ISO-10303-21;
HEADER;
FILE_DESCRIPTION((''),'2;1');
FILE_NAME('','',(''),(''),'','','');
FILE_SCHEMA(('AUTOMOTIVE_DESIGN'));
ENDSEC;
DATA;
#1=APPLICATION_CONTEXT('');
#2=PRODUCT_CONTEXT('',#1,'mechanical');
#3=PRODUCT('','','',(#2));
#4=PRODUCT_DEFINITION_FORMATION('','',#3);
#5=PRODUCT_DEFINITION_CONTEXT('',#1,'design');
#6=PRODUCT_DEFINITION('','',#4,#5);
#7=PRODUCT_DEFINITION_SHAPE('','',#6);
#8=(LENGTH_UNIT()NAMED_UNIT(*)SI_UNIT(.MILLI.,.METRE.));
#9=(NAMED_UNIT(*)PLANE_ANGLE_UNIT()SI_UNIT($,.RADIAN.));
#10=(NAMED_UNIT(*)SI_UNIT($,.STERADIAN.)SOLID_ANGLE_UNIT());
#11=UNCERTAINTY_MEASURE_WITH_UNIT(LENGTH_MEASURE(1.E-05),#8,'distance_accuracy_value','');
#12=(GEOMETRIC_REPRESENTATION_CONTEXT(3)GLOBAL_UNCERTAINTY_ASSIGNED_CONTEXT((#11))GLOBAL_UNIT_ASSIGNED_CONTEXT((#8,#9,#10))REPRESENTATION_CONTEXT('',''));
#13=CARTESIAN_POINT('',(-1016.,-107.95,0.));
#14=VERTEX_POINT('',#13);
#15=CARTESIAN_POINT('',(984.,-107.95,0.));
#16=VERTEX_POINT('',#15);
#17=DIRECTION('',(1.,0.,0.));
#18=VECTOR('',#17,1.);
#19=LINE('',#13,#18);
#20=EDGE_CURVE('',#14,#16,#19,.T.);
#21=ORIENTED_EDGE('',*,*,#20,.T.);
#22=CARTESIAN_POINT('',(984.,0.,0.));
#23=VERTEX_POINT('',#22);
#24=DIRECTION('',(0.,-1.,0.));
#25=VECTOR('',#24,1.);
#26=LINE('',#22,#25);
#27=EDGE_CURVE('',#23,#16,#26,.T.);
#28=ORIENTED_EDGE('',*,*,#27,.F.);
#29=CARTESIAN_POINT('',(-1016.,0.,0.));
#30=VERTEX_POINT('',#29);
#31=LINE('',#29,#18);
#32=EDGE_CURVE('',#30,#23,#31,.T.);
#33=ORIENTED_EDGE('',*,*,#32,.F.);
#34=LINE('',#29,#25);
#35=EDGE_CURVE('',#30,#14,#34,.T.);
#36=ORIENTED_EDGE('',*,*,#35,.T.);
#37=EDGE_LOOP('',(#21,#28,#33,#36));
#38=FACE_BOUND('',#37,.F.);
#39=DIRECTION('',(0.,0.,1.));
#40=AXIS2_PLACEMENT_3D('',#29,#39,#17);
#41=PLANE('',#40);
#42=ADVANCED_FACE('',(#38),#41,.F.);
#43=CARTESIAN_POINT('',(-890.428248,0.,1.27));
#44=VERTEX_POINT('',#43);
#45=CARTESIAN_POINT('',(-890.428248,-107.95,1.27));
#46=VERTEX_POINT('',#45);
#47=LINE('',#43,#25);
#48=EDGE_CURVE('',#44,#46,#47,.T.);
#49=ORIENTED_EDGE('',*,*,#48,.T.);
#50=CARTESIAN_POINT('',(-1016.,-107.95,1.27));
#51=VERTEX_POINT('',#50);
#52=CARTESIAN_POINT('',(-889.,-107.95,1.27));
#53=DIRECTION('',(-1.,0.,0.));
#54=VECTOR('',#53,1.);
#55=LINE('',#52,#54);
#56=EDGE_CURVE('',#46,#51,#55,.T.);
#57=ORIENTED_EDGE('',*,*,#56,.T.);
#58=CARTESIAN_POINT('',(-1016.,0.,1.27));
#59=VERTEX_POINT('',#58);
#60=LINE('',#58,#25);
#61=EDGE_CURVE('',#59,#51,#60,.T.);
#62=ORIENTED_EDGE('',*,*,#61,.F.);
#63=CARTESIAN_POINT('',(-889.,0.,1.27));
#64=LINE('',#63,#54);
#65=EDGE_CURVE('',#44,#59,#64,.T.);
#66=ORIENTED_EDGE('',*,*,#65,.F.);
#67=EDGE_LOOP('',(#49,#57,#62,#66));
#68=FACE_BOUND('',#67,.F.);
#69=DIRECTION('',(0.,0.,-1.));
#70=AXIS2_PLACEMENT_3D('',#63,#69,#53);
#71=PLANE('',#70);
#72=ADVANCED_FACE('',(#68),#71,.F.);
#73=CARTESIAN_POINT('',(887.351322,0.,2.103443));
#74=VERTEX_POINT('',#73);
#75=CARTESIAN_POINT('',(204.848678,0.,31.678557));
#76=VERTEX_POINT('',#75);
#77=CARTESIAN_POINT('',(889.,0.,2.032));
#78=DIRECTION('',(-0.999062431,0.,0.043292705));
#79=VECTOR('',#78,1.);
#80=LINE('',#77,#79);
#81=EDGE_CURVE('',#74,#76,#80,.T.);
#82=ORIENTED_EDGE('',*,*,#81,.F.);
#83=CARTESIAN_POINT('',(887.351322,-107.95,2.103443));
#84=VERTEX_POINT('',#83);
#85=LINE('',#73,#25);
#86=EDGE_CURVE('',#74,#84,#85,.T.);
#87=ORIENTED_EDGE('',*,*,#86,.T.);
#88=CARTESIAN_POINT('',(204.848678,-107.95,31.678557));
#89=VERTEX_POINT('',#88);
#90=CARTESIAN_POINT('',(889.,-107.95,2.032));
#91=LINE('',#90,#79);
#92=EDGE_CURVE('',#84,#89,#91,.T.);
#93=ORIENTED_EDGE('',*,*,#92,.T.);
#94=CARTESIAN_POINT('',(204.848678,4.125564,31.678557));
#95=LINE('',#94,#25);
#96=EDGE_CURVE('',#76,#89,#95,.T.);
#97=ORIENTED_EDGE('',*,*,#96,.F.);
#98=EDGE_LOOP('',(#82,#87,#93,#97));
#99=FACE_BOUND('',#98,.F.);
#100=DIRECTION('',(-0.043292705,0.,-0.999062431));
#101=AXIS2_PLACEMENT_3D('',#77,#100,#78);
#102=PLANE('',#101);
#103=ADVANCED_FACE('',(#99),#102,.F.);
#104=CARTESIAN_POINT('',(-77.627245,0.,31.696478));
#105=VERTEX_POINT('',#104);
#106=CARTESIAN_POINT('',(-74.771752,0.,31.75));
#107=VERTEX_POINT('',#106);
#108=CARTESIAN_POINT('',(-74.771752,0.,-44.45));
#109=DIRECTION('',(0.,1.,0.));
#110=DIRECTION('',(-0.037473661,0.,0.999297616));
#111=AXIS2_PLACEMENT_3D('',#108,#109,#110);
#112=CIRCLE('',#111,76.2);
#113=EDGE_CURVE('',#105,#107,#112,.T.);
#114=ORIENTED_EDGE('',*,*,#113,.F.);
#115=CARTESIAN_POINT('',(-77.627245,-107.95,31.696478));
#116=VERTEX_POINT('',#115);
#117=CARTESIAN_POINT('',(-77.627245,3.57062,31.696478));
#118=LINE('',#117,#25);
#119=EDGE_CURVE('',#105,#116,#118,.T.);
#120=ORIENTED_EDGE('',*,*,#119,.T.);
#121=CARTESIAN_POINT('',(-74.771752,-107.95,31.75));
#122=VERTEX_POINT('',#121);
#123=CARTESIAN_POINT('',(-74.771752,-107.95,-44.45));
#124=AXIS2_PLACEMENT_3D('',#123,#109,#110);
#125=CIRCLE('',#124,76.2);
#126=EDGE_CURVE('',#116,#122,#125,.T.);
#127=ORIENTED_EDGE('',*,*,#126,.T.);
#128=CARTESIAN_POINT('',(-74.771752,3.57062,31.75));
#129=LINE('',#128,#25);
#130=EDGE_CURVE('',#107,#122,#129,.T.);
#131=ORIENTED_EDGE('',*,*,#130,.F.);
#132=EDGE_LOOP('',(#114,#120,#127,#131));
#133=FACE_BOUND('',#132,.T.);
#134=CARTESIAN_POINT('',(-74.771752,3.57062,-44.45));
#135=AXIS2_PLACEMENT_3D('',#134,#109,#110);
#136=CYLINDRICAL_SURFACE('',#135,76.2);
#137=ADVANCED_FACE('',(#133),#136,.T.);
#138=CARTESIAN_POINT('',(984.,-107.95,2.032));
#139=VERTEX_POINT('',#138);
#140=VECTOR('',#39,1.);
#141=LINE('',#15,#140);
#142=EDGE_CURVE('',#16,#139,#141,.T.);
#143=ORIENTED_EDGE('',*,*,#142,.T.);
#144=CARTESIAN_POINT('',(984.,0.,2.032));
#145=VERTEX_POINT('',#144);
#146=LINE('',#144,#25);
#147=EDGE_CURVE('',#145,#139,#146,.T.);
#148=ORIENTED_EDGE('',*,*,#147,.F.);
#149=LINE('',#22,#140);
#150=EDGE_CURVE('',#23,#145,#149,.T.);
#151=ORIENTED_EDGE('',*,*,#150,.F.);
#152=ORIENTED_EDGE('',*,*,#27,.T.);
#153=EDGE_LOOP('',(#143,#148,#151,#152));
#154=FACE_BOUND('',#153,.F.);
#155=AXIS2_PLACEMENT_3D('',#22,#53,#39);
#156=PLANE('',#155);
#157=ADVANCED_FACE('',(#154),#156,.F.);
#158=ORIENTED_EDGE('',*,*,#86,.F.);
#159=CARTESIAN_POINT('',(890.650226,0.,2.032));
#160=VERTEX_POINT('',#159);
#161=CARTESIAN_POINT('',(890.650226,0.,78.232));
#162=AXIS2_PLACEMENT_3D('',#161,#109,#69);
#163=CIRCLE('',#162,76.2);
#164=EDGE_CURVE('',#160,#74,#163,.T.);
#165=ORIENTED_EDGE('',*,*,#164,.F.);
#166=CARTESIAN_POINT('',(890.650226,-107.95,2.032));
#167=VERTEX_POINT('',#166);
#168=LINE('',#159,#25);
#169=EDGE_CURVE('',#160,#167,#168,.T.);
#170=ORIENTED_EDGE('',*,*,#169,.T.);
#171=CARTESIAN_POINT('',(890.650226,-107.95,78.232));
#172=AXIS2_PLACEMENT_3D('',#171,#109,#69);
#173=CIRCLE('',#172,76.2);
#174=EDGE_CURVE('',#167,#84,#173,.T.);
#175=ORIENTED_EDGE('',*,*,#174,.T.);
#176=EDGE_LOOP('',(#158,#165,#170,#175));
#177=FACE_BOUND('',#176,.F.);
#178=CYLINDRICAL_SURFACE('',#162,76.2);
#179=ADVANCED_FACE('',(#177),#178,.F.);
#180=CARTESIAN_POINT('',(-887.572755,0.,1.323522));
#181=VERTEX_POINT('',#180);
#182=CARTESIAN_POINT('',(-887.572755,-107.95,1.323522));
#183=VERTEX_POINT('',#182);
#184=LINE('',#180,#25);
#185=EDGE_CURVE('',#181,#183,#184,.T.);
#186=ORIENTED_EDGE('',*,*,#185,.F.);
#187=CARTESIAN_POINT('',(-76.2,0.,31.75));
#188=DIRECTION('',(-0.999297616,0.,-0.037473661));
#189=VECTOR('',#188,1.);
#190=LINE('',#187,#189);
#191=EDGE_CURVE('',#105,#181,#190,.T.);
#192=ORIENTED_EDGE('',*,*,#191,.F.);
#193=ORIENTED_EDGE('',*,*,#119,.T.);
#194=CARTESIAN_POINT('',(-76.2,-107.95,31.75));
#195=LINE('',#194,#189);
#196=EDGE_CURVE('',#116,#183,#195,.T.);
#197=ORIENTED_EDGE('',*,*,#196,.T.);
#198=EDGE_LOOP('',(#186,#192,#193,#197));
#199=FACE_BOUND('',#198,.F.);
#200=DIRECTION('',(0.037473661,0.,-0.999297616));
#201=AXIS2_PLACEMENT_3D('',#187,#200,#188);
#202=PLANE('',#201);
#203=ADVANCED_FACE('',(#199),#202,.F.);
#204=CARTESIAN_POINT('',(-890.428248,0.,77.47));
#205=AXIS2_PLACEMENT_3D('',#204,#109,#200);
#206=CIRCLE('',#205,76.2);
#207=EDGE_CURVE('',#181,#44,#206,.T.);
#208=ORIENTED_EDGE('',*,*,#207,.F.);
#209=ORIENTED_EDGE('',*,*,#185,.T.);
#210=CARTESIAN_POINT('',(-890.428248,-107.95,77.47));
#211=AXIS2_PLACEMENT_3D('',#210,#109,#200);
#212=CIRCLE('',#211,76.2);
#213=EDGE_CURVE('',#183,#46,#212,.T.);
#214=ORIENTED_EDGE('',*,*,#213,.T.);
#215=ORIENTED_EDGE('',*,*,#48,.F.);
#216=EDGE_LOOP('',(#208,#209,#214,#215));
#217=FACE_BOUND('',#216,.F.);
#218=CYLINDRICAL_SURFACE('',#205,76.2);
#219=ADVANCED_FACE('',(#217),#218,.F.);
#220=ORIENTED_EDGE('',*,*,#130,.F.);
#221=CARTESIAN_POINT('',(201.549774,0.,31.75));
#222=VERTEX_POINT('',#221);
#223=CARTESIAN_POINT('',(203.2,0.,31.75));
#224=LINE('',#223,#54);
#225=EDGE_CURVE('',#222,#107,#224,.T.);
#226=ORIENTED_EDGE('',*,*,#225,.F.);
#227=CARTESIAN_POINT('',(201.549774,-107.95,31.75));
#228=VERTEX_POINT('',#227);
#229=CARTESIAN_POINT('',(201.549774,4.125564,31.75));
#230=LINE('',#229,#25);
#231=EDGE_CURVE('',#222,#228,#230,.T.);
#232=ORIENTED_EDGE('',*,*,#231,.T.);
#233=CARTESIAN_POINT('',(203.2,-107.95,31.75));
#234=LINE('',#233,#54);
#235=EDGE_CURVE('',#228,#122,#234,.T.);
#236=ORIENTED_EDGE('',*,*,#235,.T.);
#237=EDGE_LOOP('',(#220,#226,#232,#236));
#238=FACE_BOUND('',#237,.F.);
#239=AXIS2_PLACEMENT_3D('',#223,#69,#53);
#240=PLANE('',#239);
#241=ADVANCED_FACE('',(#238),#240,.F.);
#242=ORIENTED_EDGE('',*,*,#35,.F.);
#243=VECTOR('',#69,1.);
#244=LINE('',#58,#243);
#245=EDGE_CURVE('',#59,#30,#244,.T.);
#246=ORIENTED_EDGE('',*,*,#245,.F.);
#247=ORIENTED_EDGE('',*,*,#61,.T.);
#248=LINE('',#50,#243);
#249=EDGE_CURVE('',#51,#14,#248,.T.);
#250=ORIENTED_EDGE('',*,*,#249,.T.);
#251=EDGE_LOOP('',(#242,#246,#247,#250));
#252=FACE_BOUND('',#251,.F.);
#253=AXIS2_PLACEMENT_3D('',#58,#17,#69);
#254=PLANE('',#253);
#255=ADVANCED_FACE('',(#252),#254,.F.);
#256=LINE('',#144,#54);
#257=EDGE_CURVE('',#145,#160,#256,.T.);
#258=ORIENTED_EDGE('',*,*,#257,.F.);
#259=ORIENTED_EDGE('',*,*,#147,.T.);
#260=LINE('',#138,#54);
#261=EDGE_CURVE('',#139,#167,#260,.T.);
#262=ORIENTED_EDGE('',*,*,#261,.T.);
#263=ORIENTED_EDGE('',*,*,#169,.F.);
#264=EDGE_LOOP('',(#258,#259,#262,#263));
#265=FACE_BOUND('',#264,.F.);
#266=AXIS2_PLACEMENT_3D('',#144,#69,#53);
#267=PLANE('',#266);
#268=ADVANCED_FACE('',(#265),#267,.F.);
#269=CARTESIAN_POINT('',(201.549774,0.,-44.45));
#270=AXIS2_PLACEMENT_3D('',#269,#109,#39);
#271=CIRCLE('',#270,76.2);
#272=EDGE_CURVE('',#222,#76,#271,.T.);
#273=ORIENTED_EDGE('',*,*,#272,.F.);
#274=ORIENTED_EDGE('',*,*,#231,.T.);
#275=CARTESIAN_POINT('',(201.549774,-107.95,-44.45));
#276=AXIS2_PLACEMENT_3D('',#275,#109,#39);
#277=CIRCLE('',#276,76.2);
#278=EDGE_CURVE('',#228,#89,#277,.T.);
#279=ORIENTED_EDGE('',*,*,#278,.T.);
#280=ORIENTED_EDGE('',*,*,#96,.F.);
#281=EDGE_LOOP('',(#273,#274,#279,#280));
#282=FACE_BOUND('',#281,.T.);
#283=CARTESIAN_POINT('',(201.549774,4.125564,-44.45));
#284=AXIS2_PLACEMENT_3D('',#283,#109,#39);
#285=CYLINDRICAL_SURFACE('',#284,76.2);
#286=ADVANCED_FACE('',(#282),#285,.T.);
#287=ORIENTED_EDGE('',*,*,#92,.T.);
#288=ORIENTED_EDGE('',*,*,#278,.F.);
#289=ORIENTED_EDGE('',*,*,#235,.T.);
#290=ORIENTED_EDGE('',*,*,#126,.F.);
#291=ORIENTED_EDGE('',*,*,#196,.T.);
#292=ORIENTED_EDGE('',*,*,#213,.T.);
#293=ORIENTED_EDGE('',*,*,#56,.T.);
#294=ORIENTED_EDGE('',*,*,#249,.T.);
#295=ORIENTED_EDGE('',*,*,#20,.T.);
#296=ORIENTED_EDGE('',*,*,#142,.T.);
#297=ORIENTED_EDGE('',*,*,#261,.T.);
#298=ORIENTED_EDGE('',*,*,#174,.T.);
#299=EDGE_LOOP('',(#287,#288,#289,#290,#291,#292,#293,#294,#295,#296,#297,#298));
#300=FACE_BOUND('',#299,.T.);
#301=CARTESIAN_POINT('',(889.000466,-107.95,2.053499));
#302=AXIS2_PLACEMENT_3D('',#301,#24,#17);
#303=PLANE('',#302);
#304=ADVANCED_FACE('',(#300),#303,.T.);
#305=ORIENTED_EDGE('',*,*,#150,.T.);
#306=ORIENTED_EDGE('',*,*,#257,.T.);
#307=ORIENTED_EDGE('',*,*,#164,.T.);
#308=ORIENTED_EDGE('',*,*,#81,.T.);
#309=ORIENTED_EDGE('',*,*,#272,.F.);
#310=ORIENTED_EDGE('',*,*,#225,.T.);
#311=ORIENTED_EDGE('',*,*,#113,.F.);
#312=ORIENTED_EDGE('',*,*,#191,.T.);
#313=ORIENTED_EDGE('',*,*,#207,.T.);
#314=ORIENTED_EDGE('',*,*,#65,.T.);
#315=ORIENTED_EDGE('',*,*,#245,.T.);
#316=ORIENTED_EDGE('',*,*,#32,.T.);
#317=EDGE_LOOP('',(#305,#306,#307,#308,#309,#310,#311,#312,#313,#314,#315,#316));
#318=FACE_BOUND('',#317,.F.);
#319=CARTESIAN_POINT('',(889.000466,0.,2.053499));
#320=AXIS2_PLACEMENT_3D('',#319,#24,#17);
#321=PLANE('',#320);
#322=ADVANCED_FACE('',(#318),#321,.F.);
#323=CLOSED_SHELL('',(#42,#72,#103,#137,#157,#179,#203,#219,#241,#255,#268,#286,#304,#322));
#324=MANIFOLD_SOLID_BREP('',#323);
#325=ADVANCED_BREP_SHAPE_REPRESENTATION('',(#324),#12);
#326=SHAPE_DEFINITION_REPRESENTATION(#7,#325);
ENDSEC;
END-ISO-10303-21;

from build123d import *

# Parameters (mm, degrees)
F1_DEPTH    = 107.95
F2_T1_DEPTH = 107.95
F3_T1_DEPTH = 107.95
F3_T3_DEPTH = 115.0912402897
F3_T5_DEPTH = 116.2011283703


# Not quite as in the source:
# - a fillet or chamfer that OpenCascade refuses, or shapes differently, is made with other operations: its cross-section is extruded or revolved along the edge and cut away or added


with BuildPart() as f1:
    # F0 (on Front) → F1 (new body)
    with BuildSketch(Plane.XZ):
        Polygon((-1016, 1.27), (-1016, 0), (984, 0), (984, 2.032), (889, 2.032), (203.2, 31.75), (-76.2, 31.75), (-889, 1.27), align=None)
    extrude(amount=F1_DEPTH)

    # F2: fillet of radius 76.2 on 1 edges, made by hand

    # F2_s2 → F2_t1 (join)
    with BuildSketch(Plane.XZ):
        with BuildLine():
            ThreePointArc((-887.5727551211, 1.323521683), (-889.0002508168, 1.2833815957), (-890.4282480579, 1.27))
            Line((-890.4282480579, 1.27), (-889, 1.27))
            Line((-889, 1.27), (-887.5727551211, 1.323521683))
        make_face()
    extrude(amount=F2_T1_DEPTH)

    # F3: fillet of radius 76.2 on 3 edges, made by hand

    # F3_s2 → F3_t1 (join)
    with BuildSketch(Plane.XZ):
        with BuildLine():
            ThreePointArc((890.6502256741, 2.032), (889.0003868453, 2.0498627772), (887.3513215259, 2.1034427339))
            Line((887.3513215259, 2.1034427339), (889, 2.032))
            Line((889, 2.032), (890.6502256741, 2.032))
        make_face()
    extrude(amount=F3_T1_DEPTH)

    # F3_s4 → F3_t3 (cut)
    with BuildSketch(Plane.XZ.offset(-3.5706201449)):
        with BuildLine():
            ThreePointArc((-77.6272448789, 31.696478317), (-76.1997491832, 31.7366184043), (-74.7717519421, 31.75))
            Line((-74.7717519421, 31.75), (-76.2, 31.75))
            Line((-76.2, 31.75), (-77.6272448789, 31.696478317))
        make_face()
    extrude(amount=F3_T3_DEPTH, mode=Mode.SUBTRACT)

    # F3_s6 → F3_t5 (cut)
    with BuildSketch(Plane.XZ.offset(-4.1255641851)):
        with BuildLine():
            ThreePointArc((201.5497743259, 31.75), (203.1996131547, 31.7321372228), (204.8486784741, 31.6785572661))
            Line((204.8486784741, 31.6785572661), (203.2, 31.75))
            Line((203.2, 31.75), (201.5497743259, 31.75))
        make_face()
    extrude(amount=F3_T5_DEPTH, mode=Mode.SUBTRACT)


solid = f1.part
